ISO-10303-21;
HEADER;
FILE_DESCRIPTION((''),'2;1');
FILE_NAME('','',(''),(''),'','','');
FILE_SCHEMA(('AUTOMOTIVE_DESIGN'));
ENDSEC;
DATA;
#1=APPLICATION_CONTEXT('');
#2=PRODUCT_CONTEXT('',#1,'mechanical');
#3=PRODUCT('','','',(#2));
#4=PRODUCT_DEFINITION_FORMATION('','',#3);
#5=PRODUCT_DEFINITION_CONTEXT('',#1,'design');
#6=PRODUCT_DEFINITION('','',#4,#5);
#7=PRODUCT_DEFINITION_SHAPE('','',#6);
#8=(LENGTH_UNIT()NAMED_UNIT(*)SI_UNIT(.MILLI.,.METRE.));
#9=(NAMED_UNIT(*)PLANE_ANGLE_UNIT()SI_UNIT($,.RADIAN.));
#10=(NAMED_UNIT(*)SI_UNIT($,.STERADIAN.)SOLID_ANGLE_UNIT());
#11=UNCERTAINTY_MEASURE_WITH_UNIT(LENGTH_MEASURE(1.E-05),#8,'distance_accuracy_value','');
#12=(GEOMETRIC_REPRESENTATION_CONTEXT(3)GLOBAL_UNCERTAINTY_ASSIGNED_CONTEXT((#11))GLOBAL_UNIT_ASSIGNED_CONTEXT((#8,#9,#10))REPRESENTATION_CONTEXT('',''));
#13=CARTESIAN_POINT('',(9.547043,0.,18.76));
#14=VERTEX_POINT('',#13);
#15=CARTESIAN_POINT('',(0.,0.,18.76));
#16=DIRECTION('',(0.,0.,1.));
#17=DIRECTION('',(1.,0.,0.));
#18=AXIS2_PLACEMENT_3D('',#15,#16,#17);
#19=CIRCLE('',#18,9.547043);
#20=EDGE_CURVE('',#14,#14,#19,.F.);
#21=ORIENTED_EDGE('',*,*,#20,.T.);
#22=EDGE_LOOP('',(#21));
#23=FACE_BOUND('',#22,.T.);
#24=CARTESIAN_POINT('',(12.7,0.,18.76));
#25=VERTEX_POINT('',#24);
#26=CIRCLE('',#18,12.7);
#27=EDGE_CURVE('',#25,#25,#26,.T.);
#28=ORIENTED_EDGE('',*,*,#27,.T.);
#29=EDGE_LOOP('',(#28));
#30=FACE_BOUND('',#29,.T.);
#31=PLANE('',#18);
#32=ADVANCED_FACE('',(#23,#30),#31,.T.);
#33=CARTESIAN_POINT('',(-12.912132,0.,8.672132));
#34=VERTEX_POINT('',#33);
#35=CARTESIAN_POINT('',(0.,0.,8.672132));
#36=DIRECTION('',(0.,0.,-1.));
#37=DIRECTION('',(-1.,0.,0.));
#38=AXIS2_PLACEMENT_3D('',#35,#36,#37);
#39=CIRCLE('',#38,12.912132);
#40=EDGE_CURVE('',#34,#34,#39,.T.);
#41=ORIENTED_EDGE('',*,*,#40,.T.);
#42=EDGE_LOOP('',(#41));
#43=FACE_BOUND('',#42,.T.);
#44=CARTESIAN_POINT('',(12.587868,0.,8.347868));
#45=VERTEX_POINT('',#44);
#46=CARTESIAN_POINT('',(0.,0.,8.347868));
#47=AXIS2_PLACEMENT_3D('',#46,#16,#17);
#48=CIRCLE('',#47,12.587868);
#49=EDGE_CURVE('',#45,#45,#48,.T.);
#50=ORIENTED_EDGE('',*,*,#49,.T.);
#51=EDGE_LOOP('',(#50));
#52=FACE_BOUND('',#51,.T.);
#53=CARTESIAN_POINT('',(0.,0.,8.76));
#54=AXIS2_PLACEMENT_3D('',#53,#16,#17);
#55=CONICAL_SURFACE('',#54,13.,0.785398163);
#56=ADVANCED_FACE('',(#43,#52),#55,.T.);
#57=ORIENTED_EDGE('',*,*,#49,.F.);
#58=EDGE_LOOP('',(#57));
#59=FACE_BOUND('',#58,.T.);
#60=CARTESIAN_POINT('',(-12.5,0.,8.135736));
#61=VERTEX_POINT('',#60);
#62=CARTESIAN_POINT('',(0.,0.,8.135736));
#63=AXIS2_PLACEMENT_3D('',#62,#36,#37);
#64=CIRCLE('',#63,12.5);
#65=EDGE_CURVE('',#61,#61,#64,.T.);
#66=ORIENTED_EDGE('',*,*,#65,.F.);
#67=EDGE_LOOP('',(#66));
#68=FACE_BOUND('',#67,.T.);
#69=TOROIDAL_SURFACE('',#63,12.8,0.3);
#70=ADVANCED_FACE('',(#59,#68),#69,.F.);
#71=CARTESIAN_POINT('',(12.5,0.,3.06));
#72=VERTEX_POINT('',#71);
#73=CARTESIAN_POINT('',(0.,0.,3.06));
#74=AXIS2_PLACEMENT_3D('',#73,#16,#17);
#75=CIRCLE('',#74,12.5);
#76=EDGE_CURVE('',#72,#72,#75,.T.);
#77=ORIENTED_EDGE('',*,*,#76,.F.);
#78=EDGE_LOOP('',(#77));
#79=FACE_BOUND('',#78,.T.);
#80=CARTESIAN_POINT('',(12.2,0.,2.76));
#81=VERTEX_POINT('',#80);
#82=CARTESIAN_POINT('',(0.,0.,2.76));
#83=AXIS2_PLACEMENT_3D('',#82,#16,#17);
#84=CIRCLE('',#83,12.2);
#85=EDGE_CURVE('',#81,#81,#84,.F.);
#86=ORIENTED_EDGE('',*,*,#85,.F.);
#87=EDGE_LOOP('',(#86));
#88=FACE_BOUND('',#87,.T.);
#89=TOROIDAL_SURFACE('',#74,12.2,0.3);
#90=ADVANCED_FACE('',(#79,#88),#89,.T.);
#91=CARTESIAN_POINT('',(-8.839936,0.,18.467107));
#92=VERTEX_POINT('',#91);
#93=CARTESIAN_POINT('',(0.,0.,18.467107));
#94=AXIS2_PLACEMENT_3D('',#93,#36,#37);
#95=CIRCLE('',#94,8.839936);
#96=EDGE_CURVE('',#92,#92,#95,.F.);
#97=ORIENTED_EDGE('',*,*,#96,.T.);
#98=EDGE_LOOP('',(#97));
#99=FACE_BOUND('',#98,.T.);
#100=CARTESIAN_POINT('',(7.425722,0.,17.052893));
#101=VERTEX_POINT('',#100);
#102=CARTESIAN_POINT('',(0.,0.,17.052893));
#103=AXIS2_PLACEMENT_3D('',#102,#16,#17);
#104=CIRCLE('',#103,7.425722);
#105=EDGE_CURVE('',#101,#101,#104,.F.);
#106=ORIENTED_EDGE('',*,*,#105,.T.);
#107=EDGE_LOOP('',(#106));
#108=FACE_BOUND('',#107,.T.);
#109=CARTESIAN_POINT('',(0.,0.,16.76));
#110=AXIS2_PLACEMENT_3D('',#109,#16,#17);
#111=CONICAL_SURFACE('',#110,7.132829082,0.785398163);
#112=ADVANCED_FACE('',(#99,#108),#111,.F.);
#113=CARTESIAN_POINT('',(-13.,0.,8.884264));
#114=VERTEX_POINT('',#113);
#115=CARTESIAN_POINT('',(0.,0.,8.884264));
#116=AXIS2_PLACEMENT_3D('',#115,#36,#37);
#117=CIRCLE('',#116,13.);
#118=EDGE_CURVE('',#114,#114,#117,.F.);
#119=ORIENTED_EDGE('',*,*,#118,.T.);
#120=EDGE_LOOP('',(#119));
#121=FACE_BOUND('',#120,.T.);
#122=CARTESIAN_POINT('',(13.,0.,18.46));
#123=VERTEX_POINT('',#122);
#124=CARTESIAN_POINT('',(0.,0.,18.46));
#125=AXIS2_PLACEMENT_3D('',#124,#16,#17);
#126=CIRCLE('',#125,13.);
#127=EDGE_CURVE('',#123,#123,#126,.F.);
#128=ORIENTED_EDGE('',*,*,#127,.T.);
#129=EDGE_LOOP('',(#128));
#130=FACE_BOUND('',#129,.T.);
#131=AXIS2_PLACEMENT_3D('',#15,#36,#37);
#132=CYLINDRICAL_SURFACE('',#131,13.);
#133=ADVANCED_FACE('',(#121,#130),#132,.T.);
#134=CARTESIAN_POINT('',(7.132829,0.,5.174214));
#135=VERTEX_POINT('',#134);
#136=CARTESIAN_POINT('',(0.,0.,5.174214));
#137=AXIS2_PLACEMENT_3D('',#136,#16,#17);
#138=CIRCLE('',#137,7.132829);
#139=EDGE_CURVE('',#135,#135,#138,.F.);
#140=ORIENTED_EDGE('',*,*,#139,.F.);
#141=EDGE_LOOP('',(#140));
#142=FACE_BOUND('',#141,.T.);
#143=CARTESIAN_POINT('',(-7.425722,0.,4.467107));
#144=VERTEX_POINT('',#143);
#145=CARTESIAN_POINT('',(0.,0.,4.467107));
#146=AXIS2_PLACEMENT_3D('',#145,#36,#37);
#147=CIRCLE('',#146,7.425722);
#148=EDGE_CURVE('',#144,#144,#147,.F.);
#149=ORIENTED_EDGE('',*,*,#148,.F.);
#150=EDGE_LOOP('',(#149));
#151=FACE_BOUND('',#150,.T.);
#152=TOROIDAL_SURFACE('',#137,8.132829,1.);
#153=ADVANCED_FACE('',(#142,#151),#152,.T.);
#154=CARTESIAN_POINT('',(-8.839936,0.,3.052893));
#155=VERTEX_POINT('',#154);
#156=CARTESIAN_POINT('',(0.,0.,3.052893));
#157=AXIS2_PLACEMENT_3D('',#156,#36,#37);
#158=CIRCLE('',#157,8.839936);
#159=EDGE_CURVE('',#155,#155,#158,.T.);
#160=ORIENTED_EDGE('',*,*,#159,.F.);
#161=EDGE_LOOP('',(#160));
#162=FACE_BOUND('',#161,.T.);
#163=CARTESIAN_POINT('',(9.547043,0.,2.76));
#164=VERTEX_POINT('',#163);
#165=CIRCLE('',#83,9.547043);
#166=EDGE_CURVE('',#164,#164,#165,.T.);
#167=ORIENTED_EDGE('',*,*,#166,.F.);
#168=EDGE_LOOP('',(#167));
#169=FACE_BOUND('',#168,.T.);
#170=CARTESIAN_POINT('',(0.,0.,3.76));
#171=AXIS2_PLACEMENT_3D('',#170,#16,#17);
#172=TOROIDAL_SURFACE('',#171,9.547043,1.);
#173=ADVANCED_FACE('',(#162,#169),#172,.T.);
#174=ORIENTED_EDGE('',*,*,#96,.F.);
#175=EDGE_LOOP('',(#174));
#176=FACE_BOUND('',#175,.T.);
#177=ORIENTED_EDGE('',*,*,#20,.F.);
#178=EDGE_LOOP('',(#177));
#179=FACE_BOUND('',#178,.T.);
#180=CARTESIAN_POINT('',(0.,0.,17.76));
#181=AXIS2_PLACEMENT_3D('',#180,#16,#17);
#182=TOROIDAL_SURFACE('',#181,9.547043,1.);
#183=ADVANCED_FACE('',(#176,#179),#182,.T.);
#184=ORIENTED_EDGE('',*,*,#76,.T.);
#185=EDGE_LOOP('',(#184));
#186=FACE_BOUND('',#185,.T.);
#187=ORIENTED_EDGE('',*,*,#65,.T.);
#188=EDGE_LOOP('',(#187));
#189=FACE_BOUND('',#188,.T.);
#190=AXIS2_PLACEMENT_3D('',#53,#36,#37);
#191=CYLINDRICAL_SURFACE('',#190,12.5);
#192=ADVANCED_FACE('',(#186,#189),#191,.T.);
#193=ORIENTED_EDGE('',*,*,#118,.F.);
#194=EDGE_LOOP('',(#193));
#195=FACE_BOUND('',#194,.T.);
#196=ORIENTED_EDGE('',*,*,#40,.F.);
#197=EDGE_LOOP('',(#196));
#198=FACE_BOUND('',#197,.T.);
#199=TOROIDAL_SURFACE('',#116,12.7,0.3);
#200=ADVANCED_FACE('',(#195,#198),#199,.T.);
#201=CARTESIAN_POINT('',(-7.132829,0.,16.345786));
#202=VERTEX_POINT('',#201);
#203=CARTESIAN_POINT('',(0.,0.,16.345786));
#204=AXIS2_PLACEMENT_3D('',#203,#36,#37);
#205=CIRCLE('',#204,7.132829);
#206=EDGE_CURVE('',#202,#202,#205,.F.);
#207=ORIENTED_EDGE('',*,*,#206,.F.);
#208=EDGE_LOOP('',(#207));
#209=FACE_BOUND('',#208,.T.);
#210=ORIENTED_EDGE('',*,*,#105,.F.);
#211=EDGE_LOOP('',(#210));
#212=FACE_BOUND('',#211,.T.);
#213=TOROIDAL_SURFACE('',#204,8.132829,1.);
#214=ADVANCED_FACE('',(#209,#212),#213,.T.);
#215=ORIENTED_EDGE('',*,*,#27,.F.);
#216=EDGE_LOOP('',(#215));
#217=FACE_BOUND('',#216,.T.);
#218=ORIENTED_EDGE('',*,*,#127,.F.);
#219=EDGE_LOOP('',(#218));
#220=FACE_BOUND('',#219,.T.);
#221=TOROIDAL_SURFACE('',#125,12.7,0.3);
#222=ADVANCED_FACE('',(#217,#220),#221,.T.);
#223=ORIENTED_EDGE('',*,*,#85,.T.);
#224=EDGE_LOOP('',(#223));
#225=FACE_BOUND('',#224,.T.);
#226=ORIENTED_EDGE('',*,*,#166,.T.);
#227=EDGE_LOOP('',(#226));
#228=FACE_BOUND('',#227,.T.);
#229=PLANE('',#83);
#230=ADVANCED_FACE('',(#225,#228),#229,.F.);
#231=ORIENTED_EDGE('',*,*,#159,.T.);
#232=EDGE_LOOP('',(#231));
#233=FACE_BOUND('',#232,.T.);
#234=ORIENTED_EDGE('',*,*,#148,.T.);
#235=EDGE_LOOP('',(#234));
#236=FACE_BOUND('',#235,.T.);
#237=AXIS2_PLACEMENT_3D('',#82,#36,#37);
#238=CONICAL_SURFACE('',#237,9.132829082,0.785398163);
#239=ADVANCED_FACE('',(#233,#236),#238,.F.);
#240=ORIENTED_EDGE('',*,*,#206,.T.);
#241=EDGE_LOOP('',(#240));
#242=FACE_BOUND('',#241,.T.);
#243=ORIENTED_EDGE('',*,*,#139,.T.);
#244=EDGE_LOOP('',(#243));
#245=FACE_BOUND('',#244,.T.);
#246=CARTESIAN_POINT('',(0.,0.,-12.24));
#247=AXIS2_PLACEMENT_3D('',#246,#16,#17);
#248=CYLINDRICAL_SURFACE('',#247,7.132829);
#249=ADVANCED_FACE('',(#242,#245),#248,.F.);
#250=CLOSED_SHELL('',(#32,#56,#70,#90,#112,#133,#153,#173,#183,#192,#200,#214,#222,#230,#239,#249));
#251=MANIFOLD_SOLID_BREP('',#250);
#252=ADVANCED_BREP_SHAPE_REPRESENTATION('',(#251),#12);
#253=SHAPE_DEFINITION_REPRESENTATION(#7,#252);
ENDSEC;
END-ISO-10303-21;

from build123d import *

# Parameters (mm, degrees)
SKETCH1_R           = 5
BOSS_EXTRUDE1_DEPTH = 2.76
SKETCH4_R           = 12.5
BOSS_EXTRUDE2_DEPTH = 6
SKETCH5_R           = 13
BOSS_EXTRUDE3_DEPTH = 10
FILLET2_R           = 0.3
FILLET3_R           = 0.3
SKETCH6_R           = 7.132829082
CUT_EXTRUDE1_DEPTH  = 31
CHAMFER1_SIZE       = 2
FILLET4_R           = 1
CHAMFER3_SIZE       = 0.5
FILLET7_R           = 0.3


with BuildPart() as part:
    # Sketch1 → Boss-Extrude1 (new body)
    with BuildSketch(Plane.XY):
        Circle(SKETCH1_R)
    extrude(amount=BOSS_EXTRUDE1_DEPTH)

    # Sketch4 → Boss-Extrude2 (add)
    with BuildSketch(Plane.XY.offset(2.76)):
        Circle(SKETCH4_R)
    extrude(amount=BOSS_EXTRUDE2_DEPTH)

    # Sketch5 → Boss-Extrude3 (add)
    with BuildSketch(Plane.XY.offset(8.76)):
        Circle(SKETCH5_R)
    extrude(amount=BOSS_EXTRUDE3_DEPTH)

    # Fillet2
    fillet2_edges = [part.edges().sort_by_distance(p)[0] for p in [
        (-5, 0, 2.76),
    ]]
    fillet(fillet2_edges, radius=FILLET2_R)

    # Fillet3
    fillet3_edges = [part.edges().sort_by_distance(p)[0] for p in [
        (-13, 0, 18.76),
    ]]
    fillet(fillet3_edges, radius=FILLET3_R)

    # Sketch6 → Cut-Extrude1 (cut)
    with BuildSketch(Plane.XY.offset(18.76)):
        Circle(SKETCH6_R)
    extrude(amount=-CUT_EXTRUDE1_DEPTH, mode=Mode.SUBTRACT)

    # Chamfer1
    chamfer1_edges = [part.edges().sort_by_distance(p)[0] for p in [
        (-7.132829082, 0, 2.76),
        (-7.132829082, 0, 18.76),
    ]]
    chamfer(chamfer1_edges, length=CHAMFER1_SIZE)

    # Fillet4
    fillet4_edges = [part.edges().sort_by_distance(p)[0] for p in [
        (-9.132829082, 0, 2.76),
        (-7.132829082, 0, 16.76),
        (-7.132829082, 0, 4.76),
        (-9.132829082, 0, 18.76),
    ]]
    fillet(fillet4_edges, radius=FILLET4_R)

    # Chamfer3
    chamfer3_edges = [part.edges().sort_by_distance(p)[0] for p in [
        (-12.5, 0, 8.76),
    ]]
    chamfer(chamfer3_edges, length=CHAMFER3_SIZE - 0.0001)  # a hair under: the kernel refuses the full size

    # Fillet6: read off the stored shape, not the designer's step
    # Fillet6 outline → Fillet6 (revolve, cut)
    with BuildSketch(Plane.XZ):
        with BuildLine():
            Line((13, 8.672132034), (13, 8.884264069))
            ThreePointArc((13, 8.884264069), (12.97716386, 8.769459039), (12.912132034, 8.672132034))
            Line((12.912132034, 8.672132034), (13, 8.672132034))
        make_face()
    revolve(axis=Axis((0, 0, 0), (0, 0, 1)), mode=Mode.SUBTRACT)

    # Fillet6 2 outline → Fillet6 2 (revolve)
    with BuildSketch(Plane.XZ):
        with BuildLine():
            ThreePointArc((12.5, 8.135735931), (12.52283614, 8.250540961), (12.587867966, 8.347867966))
            Line((12.587867966, 8.347867966), (12.5, 8.347867966))
            Line((12.5, 8.347867966), (12.5, 8.135735931))
        make_face()
    revolve(axis=Axis((0, 0, 0), (0, 0, 1)))

    # Fillet7
    fillet7_edges = [part.edges().sort_by_distance(p)[0] for p in [
        (-12.5, 0, 2.76),
    ]]
    fillet(fillet7_edges, radius=FILLET7_R)


solid = part.part
